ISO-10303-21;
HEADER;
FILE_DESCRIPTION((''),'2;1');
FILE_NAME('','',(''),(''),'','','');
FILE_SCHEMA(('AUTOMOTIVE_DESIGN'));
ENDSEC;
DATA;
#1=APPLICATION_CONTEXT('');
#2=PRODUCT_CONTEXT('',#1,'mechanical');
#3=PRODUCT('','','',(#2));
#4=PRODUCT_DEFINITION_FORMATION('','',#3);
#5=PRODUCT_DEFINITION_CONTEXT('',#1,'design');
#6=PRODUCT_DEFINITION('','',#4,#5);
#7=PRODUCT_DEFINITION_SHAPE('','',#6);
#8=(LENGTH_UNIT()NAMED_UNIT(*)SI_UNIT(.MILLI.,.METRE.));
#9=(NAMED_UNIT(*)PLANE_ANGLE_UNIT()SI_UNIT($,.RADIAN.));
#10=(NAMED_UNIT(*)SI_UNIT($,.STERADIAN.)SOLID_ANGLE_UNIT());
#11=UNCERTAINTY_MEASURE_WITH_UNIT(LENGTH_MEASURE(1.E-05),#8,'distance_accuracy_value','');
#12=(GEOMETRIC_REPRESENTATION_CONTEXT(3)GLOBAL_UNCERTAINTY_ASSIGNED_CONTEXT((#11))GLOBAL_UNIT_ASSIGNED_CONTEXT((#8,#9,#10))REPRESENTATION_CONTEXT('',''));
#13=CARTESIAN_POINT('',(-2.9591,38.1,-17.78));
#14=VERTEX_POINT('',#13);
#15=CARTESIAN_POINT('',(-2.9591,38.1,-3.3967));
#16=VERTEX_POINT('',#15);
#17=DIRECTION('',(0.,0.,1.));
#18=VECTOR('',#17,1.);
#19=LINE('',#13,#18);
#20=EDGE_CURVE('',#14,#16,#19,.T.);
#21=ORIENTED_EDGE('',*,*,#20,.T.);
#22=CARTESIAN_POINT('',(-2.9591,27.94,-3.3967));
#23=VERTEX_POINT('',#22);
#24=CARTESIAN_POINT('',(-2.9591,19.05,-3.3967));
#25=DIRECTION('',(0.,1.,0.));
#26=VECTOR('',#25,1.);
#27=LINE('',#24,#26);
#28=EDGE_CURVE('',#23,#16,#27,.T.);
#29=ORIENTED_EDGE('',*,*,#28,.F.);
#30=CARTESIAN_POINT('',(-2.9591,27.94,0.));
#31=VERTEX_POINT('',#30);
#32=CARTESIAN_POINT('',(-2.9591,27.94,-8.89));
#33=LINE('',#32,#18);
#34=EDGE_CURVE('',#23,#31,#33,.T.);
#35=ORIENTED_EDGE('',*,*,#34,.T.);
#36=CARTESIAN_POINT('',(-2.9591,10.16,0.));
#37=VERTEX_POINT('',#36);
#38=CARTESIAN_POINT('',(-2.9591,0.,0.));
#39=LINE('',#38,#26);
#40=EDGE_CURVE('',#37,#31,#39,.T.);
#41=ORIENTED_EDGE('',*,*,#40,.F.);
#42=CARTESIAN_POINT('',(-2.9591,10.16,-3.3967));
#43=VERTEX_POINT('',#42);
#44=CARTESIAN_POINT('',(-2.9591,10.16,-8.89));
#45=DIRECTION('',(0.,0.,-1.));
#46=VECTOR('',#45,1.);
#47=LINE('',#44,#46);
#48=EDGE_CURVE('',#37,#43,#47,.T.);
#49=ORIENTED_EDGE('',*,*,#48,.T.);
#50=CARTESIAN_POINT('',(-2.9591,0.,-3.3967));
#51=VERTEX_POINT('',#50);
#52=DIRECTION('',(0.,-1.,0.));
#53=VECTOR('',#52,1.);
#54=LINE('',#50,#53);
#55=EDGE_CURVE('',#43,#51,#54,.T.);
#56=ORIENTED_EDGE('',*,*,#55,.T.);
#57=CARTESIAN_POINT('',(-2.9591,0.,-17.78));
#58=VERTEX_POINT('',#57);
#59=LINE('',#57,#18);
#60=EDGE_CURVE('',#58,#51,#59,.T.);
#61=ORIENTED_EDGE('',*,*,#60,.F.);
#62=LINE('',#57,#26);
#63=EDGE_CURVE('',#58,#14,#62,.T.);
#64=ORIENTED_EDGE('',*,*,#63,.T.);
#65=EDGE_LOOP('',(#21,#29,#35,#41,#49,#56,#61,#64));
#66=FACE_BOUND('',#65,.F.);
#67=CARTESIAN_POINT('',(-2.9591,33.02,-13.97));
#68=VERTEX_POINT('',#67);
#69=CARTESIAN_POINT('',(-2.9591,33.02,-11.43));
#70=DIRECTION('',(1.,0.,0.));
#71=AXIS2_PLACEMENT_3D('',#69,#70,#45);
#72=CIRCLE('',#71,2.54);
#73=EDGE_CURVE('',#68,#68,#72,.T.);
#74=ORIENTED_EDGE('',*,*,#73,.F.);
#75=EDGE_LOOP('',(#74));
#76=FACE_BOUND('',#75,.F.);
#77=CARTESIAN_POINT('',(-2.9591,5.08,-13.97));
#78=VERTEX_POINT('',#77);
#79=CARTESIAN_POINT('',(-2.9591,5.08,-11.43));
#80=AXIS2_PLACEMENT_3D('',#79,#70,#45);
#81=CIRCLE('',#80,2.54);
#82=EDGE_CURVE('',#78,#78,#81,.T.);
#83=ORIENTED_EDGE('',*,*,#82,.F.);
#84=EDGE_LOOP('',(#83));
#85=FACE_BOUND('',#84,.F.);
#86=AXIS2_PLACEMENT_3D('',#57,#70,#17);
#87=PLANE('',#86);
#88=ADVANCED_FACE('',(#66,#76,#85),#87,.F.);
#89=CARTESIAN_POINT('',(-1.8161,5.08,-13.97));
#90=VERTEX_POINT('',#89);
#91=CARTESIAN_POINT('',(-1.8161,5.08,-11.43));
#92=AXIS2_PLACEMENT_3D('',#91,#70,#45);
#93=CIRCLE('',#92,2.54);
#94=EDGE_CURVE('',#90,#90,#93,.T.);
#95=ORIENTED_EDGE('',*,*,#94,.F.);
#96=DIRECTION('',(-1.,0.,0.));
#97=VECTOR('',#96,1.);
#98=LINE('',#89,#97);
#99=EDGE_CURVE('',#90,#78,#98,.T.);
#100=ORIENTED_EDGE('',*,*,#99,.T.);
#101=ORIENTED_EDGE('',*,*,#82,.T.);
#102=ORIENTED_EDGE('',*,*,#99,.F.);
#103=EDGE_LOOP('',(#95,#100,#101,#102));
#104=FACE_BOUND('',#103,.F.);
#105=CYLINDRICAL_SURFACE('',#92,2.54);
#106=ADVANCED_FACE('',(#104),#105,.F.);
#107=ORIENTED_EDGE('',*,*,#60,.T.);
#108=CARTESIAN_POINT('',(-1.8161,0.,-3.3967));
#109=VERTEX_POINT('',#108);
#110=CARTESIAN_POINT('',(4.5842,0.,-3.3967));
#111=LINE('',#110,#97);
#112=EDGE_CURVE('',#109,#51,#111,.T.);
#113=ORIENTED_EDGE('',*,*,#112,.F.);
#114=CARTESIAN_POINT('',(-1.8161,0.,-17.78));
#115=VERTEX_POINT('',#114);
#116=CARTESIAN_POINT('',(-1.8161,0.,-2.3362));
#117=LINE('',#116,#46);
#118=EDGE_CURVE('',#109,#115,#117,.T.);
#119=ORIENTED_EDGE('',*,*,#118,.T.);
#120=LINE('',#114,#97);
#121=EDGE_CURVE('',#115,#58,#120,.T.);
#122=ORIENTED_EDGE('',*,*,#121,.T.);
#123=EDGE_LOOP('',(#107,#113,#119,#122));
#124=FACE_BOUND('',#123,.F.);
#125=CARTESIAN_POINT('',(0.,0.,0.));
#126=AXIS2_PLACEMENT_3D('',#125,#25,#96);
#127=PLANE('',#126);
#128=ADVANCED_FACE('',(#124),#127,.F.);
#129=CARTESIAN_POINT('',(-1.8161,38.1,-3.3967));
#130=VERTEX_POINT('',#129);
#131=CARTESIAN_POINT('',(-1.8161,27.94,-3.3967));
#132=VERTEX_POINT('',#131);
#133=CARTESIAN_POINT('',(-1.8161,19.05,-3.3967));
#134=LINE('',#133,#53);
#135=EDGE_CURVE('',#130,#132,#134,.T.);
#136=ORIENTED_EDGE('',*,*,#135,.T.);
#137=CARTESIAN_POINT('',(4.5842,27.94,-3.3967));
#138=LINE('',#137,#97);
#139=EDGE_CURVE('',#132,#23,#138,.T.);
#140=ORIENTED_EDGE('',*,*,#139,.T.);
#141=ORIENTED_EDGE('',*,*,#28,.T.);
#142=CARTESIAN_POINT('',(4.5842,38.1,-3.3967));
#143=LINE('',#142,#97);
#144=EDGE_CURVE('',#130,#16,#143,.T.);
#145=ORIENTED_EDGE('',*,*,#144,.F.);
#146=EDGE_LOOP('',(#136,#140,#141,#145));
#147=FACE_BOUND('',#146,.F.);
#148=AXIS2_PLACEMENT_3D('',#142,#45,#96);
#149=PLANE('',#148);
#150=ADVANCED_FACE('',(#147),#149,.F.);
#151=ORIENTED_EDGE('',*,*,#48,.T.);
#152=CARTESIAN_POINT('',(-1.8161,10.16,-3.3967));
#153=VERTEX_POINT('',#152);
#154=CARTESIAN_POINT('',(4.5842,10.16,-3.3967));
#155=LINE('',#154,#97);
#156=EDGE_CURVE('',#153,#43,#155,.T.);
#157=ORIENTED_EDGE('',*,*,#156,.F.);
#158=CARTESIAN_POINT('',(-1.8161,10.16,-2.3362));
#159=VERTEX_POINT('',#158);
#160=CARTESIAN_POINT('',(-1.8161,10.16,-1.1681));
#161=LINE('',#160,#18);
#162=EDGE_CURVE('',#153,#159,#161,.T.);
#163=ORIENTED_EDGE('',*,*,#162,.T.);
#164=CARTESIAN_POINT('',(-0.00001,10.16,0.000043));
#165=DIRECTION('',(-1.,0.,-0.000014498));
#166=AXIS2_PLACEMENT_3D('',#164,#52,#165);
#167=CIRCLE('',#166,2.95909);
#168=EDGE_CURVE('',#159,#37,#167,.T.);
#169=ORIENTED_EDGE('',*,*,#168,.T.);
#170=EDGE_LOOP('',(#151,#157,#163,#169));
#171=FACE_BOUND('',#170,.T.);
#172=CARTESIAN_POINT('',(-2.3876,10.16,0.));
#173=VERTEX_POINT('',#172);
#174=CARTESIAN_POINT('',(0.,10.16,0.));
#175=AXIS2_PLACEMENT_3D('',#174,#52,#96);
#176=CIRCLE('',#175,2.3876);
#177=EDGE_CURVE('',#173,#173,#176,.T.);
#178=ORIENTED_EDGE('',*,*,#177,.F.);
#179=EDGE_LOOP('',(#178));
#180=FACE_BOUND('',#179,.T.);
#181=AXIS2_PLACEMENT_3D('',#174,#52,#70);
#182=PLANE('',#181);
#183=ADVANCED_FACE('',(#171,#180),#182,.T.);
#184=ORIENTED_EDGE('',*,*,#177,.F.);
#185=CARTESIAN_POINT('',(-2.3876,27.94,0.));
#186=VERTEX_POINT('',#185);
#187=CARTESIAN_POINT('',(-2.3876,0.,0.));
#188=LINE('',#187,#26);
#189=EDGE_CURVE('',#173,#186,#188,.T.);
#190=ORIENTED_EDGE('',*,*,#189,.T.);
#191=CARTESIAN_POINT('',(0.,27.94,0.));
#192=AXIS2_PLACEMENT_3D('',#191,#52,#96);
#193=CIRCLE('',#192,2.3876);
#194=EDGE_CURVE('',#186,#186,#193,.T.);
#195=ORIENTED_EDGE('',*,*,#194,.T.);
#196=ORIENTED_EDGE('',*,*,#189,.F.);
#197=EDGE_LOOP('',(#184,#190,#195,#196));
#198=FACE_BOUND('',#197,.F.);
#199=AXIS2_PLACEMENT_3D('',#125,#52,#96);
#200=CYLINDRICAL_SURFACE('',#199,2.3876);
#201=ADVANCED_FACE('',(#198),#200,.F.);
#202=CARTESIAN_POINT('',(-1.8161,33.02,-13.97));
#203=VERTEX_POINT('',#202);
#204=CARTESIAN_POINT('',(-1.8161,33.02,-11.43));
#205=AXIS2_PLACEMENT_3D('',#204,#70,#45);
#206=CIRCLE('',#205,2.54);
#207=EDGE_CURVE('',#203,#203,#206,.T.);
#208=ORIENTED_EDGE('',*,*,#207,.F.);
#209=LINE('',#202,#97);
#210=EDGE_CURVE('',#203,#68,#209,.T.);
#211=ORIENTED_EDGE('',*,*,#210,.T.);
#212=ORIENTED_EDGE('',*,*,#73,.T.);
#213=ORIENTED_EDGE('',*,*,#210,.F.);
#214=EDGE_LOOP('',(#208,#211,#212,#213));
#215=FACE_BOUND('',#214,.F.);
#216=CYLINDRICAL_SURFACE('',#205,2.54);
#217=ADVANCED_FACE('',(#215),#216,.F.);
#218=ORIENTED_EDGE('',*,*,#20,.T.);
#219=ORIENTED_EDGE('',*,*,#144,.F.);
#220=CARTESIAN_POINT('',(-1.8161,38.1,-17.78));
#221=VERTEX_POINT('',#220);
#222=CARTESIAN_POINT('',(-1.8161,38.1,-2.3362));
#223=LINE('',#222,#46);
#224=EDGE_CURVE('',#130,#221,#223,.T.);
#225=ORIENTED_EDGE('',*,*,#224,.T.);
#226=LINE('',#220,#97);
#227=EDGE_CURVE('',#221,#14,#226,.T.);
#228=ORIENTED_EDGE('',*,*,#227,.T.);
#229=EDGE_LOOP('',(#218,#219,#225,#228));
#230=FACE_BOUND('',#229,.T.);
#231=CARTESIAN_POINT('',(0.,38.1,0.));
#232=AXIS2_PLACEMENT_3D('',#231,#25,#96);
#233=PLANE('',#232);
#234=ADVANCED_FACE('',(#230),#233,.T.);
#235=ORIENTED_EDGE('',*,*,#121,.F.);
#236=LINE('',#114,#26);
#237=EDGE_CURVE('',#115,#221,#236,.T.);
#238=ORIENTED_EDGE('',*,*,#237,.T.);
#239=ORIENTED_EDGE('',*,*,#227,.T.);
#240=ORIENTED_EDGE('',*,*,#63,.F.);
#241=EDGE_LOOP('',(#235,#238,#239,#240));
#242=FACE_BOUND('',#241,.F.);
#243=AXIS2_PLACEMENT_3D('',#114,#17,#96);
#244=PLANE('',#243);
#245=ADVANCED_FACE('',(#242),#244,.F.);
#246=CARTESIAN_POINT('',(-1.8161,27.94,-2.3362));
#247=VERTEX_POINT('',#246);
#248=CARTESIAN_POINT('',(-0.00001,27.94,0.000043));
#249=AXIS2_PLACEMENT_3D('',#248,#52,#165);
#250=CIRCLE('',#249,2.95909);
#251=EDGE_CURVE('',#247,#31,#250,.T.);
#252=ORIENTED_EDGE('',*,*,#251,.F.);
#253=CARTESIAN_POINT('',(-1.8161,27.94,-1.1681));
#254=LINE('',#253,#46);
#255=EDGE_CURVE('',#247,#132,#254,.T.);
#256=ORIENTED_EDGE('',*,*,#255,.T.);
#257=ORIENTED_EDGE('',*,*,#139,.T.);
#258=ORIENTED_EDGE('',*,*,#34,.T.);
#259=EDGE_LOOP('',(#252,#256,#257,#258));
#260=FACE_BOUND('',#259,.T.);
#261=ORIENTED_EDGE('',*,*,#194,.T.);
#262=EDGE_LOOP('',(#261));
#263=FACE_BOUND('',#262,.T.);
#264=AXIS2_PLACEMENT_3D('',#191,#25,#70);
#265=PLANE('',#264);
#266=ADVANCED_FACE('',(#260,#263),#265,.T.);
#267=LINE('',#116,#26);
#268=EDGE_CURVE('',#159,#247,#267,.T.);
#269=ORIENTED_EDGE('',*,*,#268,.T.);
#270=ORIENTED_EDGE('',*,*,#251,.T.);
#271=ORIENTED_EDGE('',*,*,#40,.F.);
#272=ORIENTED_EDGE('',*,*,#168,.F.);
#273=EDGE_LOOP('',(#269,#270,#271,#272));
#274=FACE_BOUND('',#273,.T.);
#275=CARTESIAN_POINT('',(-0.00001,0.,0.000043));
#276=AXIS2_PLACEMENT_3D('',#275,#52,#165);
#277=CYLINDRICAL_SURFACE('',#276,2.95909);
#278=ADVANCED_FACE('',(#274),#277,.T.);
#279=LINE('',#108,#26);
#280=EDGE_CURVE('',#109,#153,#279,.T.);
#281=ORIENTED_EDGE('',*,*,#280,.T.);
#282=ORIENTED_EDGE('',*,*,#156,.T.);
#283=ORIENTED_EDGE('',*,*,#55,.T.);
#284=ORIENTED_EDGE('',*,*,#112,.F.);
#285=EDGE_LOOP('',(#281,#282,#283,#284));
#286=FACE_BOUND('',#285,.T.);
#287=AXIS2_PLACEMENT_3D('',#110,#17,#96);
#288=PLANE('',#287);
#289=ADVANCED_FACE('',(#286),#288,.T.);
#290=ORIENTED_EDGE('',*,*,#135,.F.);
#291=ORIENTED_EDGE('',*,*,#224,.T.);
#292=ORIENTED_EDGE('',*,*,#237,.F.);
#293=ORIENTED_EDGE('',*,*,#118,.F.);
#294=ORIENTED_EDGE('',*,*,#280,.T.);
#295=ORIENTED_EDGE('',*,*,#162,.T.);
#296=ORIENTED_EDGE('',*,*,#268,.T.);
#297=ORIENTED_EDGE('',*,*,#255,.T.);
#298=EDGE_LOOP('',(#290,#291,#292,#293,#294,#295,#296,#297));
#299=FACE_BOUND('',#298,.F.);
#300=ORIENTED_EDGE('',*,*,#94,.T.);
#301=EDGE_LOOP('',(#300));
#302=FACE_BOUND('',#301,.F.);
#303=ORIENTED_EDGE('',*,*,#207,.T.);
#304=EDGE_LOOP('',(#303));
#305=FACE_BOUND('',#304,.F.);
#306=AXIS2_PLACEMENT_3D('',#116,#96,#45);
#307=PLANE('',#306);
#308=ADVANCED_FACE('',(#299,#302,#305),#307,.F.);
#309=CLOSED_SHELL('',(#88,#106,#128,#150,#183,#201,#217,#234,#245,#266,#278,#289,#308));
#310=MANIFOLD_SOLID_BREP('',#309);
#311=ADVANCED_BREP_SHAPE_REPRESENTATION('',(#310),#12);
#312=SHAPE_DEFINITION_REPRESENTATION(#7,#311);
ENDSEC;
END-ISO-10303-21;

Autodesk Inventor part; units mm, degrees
ref_plane "YZ Plane" through (0, 0, 0) normal (1, 0, 0) x (0, 1, 0)
ref_plane "XZ Plane" through (0, 0, 0) normal (0, 1, 0) x (-1, 0, 0)
ref_plane "XY Plane" through (0, 0, 0) normal (0, 0, 1) x (1, 0, 0)
sketch "Sketch1" plane through (0, 0, 0) normal (0, 1, 0) x (-1, 0, 0)
  circle A0 centre (0, 0) radius 2.3876
  arc A1 (2.9591, 0) -> (1.8161, -2.3362) centre (0, 0) ccw
  line L0 (2.9591, 0) -> (2.3876, 0)
  line L1 (1.8161, -2.3362) -> (1.8161, -17.78)
  line L2 (1.8161, -17.78) -> (2.9591, -17.78)
  line L3 (2.9591, -17.78) -> (2.9591, 0)
  dimension "d0" = 4.7752
  dimension "d1" = 5.9182
  dimension "d2" = 17.78
  dimension "d3" = 1.143
extrude "Extrusion1" add sketch "Sketch1" along normal blind 38.1
sketch "Sketch2" plane through (0, 38.1, 0) normal (0, 1, 0) x (1, 0, 0)
  line L0 (-4.1424, -3.452) -> (4.5842, -3.452)
  line L1 (4.5842, -3.452) -> (4.5842, 3.3967)
  line L2 (4.5842, 3.3967) -> (-4.1424, 3.3967)
  line L3 (-4.1424, 3.3967) -> (-4.1424, -3.452)
  point P0 (0, 0)
  dimension "d6" = 8.7266
  dimension "d7" = 6.8487
  dimension "d8" = 4.5842
  dimension "d9" = 3.3967
sketch "Sketch3" plane through (0, 0, 0) normal (0, -1, 0) x (1, 0, 0)
  line L0 (-4.1424, -3.3967) -> (-4.1424, 3.452) projected
  line L1 (-4.1424, 3.452) -> (4.5842, 3.452) projected
  line L2 (4.5842, 3.452) -> (4.5842, -3.3967) projected
  line L3 (4.5842, -3.3967) -> (-4.1424, -3.3967) projected
  point P0 (0, 0)
extrude "Extrusion2" cut sketch "Sketch3" against normal blind 10.16
extrude "Extrusion3" cut sketch "Sketch2" against normal blind 10.16
sketch "Sketch4" plane through (-1.8161, 0, -3.7778) normal (1, 0, 0) x (0, 0, -1)
  circle A0 centre (7.6522, 5.08) radius 2.54
  circle A1 centre (7.6522, 33.02) radius 2.54
  line L0 (14.0022, 0) -> (14.0022, 38.1)
  line L1 (0, 0) -> (14.0022, 0)
  line L2 (0, 38.1) -> (14.0022, 38.1)
  line L3 (14.0022, 0) -> (14.0022, 38.1) projected
  line L4 (-0.381, 38.1) -> (14.0022, 38.1) projected
  line L5 (-0.381, 0) -> (14.0022, 0) projected
  point P0 (-2.3362, 0)
  dimension "d17" = 6.35
  dimension "d16" = 5.08
  dimension "d15" = 5.08
  dimension "d14" = 5.08
  dimension "d21" = 14.0022
  dimension "d22" = 14.0022
  dimension "d23" = 16.3385
  dimension "d24" = 38.1
extrude "Extrusion4" cut sketch "Sketch4" against normal up to next
equation "\"d14\" = d16"
properties part number "Hinge Wall 1"
